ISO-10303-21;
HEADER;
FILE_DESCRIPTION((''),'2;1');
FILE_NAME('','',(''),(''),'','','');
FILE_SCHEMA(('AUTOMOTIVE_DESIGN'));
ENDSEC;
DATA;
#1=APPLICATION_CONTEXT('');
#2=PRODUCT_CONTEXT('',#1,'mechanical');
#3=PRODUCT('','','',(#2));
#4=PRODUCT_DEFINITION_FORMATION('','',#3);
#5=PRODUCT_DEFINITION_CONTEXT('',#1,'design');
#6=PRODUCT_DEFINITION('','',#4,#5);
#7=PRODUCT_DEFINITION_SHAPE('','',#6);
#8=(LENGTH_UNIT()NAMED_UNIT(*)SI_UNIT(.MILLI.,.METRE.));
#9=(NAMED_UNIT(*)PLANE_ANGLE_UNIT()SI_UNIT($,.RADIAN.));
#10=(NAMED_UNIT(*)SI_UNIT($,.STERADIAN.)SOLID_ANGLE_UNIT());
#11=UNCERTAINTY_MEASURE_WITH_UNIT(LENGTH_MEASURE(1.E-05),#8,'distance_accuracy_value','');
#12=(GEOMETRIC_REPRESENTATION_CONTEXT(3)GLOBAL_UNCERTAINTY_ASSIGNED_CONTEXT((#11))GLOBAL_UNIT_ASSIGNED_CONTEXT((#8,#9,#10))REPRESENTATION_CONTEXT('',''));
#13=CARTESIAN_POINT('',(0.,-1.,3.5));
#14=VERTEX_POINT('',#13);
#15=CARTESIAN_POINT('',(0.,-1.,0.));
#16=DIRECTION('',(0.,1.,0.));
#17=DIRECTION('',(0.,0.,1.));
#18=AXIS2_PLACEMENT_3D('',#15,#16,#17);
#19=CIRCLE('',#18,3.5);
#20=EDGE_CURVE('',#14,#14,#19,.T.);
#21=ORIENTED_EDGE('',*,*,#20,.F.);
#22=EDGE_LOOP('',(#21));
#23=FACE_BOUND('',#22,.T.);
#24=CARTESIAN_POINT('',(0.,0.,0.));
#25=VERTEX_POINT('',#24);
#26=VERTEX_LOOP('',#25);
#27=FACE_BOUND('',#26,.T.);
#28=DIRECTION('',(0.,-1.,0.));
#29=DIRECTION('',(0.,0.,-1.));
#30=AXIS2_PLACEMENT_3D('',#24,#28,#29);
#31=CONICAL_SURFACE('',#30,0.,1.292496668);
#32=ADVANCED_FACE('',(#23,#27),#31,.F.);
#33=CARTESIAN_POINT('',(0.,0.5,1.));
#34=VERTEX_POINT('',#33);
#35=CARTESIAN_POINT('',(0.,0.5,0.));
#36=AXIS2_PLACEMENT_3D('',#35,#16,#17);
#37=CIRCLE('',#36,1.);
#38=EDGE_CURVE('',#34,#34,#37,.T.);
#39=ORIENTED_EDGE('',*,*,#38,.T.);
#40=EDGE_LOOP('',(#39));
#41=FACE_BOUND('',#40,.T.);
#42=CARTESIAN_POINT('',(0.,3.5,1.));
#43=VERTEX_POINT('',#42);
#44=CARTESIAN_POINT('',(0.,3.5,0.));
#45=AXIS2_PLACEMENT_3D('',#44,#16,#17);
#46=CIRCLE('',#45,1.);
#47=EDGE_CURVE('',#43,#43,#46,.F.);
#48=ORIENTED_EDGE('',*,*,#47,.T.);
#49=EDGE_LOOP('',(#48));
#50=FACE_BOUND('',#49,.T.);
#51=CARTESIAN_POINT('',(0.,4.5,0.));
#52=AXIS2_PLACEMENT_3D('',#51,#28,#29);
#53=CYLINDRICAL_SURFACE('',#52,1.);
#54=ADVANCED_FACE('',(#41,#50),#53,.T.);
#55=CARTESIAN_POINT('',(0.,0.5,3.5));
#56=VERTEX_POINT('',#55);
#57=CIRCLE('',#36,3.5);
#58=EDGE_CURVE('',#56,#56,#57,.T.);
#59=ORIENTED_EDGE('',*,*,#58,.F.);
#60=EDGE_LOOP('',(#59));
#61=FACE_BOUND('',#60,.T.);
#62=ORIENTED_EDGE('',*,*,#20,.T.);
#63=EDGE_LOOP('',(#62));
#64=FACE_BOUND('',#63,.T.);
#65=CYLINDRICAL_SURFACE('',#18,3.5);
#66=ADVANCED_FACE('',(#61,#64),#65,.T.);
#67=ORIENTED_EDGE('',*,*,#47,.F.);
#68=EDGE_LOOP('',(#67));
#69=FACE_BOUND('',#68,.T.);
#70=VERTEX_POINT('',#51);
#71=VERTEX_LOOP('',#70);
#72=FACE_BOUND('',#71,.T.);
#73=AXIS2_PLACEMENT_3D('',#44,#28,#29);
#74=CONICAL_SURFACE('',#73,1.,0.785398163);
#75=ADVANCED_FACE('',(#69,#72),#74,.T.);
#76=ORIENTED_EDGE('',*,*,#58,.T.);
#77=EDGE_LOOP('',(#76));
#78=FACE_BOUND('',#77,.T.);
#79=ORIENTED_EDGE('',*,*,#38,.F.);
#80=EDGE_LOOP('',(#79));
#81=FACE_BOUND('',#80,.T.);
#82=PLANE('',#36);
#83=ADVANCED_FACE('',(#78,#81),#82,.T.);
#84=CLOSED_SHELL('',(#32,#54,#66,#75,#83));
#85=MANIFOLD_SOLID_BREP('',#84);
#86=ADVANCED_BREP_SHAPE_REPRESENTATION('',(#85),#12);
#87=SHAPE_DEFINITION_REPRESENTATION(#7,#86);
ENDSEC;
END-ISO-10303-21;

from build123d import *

# Parameters (mm, degrees)
BOSS_EXTRUDE1_START = 0.5
SKETCH1_R           = 3.5
BOSS_EXTRUDE1_DEPTH = 1.5
SKETCH5_R           = 1
BOSS_EXTRUDE2_DEPTH = 4
CHAMFER1_SIZE       = 1


# Read off the part's stored shape, not the designer's step: Cut-Loft1
with BuildPart() as part:
    # Sketch1 → Boss-Extrude1 (new body)
    with BuildSketch(Plane(origin=(0, 0, 0), x_dir=(1, 0, 0), z_dir=(0, 1, 0)).offset(BOSS_EXTRUDE1_START)):
        with Locations(Location((0, 0, 0), (0, 0, 270))):
            Circle(SKETCH1_R)
    extrude(amount=-BOSS_EXTRUDE1_DEPTH)

    # Cut-Loft1 outline → Cut-Loft1 (revolve, cut)
    with BuildSketch(Plane.XY):
        Polygon((3.5, -1), (0, 0), (0, -1), align=None)
    revolve(axis=Axis((0, 0, 0), (0, 1, 0)), mode=Mode.SUBTRACT)

    # Sketch5 → Boss-Extrude2 (add)
    with BuildSketch(Plane(origin=(0, 0.5, 0), x_dir=(1, 0, 0), z_dir=(0, 1, 0))):
        with Locations(Location((0, 0, 0), (0, 0, 270))):
            Circle(SKETCH5_R)
    extrude(amount=BOSS_EXTRUDE2_DEPTH)

    # Chamfer1
    chamfer1_edges = [part.edges().sort_by_distance(p)[0] for p in [
        (0, 4.5, -1),
    ]]
    chamfer(chamfer1_edges, length=CHAMFER1_SIZE)


solid = part.part
